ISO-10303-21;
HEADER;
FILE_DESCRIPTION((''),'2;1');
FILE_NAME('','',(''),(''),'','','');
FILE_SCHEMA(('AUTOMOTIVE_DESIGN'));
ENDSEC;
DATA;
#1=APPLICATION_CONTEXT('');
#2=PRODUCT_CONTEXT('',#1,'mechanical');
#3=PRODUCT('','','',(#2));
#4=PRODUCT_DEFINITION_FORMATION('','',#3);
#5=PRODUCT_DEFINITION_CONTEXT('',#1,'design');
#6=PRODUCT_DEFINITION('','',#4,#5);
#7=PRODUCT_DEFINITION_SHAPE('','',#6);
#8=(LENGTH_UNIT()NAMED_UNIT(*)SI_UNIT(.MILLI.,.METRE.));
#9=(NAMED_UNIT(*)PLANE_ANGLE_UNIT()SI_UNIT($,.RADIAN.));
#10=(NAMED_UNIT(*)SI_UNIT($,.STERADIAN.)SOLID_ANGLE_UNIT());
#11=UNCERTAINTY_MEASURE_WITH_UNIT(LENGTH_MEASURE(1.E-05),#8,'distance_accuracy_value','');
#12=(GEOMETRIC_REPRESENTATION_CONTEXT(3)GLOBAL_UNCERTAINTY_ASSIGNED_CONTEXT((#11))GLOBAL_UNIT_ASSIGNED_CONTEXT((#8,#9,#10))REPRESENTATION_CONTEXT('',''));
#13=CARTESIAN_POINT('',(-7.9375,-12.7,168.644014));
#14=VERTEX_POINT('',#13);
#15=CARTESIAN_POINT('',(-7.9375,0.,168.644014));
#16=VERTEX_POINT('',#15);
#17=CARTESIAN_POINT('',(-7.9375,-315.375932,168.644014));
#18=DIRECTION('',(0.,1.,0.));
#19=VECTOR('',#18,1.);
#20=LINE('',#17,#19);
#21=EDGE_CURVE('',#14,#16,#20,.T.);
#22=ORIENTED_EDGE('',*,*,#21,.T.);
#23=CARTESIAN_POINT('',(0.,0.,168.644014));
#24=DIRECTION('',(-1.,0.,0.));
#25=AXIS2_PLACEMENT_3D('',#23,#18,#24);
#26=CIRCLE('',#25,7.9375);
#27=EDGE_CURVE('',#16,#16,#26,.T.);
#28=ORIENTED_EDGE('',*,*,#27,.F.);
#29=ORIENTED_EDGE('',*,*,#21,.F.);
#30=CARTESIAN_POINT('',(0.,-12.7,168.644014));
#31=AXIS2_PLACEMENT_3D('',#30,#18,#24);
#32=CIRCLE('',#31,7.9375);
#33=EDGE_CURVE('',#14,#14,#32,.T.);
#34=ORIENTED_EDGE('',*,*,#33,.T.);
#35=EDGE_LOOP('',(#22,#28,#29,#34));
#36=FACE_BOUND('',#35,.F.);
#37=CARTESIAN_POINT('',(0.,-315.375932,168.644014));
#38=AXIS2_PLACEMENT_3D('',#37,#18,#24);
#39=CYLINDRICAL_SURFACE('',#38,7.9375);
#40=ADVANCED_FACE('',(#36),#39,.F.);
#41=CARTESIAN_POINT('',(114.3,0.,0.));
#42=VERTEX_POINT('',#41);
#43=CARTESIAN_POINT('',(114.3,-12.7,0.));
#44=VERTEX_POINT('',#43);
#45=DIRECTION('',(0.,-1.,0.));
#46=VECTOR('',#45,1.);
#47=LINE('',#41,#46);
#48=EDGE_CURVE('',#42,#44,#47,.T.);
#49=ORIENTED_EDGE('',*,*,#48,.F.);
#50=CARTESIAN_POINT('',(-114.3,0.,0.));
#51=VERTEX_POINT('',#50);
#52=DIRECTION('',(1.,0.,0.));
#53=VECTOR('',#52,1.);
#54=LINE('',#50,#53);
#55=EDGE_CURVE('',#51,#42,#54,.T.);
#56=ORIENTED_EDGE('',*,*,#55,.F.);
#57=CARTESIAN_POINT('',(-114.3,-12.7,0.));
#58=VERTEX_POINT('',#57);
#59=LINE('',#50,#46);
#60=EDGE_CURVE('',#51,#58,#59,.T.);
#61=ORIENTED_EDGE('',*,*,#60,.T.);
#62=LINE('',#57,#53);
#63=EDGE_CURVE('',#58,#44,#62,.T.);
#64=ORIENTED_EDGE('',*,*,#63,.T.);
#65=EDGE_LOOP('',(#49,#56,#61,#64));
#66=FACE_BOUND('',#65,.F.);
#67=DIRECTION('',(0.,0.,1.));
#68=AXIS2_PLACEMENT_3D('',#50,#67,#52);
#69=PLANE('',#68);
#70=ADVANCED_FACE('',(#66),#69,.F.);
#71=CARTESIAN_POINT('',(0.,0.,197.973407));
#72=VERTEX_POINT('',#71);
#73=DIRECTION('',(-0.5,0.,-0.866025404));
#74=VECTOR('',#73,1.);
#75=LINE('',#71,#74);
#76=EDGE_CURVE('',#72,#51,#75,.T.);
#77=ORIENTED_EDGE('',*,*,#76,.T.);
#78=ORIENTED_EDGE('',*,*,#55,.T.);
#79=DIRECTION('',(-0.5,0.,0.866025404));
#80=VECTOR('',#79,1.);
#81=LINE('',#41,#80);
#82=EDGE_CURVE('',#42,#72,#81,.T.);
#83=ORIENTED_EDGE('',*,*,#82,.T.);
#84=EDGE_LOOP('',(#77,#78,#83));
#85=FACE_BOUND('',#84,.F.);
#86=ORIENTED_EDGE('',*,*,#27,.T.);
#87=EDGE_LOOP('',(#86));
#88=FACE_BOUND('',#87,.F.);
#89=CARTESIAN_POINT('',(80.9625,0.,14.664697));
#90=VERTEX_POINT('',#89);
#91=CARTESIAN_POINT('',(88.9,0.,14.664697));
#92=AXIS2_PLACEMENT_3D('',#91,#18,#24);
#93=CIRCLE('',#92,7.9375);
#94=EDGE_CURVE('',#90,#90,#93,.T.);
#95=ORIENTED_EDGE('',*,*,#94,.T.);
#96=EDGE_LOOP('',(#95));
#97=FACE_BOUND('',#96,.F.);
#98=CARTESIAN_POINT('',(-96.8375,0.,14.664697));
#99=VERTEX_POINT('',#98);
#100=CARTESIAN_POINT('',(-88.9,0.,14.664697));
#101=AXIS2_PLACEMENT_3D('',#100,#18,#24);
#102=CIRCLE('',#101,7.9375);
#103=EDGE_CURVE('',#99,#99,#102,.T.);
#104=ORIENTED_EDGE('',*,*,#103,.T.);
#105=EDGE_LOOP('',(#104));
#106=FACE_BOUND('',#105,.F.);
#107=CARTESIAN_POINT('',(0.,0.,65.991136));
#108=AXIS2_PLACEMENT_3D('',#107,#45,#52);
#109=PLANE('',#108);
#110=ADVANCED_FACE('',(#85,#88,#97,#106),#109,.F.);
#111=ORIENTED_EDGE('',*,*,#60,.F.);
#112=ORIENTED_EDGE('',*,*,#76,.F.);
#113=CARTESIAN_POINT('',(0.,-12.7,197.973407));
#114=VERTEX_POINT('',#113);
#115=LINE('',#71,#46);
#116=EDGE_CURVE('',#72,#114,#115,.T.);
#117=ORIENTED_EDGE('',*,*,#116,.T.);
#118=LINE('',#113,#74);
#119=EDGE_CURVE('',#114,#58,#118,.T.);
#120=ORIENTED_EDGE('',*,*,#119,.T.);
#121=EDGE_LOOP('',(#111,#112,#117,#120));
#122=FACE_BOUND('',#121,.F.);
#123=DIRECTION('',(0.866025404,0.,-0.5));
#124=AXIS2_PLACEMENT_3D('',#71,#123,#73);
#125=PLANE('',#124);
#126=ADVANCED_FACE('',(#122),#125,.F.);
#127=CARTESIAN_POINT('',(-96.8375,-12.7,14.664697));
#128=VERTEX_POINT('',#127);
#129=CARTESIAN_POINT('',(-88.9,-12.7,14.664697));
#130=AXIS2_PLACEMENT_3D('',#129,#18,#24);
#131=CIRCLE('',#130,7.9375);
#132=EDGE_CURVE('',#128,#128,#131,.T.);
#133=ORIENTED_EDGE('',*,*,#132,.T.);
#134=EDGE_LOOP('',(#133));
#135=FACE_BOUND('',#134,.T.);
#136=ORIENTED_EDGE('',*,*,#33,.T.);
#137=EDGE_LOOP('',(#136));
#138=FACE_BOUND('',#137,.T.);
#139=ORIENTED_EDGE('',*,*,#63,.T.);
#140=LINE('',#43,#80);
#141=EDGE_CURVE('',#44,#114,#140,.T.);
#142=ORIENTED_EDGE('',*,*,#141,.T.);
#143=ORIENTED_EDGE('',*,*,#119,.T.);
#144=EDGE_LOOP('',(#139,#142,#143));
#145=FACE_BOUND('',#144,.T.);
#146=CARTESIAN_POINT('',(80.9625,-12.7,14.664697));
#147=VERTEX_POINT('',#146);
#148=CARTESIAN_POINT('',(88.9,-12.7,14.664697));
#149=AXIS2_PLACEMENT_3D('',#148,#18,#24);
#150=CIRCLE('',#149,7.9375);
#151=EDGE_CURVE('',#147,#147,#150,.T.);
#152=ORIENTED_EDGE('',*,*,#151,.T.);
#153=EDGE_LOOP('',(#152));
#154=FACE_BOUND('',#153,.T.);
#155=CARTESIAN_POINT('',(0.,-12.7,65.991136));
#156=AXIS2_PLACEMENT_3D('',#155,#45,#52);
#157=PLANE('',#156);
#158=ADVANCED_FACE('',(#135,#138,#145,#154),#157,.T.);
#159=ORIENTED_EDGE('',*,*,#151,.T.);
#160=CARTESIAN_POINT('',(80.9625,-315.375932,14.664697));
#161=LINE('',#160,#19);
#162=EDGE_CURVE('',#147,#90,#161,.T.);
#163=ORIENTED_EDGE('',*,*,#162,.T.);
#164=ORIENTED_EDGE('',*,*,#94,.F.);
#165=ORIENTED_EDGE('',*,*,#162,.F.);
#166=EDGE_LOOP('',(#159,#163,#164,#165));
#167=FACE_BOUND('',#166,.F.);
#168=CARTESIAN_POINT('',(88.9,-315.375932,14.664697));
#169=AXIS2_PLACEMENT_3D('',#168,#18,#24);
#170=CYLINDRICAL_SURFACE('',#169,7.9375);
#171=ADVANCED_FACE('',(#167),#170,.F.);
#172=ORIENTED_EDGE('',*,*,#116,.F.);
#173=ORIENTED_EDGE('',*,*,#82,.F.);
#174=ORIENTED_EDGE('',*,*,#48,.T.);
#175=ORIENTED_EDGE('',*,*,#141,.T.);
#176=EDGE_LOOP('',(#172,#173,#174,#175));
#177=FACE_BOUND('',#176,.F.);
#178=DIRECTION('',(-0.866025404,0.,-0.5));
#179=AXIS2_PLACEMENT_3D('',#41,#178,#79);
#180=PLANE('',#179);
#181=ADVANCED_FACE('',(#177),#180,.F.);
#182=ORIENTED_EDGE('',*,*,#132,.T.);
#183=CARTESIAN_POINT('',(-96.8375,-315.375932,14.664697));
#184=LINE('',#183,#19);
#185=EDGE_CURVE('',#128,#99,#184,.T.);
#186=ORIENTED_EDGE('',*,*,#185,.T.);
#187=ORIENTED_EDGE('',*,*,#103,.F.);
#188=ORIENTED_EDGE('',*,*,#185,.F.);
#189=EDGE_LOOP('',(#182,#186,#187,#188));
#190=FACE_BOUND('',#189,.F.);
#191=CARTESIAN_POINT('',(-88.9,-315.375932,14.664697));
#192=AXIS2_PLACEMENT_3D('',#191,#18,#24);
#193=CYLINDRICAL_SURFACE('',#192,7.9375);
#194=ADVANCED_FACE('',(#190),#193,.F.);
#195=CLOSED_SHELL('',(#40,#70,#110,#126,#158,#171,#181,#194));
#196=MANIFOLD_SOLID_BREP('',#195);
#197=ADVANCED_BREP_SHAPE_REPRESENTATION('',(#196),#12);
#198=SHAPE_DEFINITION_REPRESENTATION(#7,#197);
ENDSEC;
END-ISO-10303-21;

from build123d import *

# Parameters (mm, degrees)
F1_DEPTH = 12.7
F3_D     = 15.875


# Not quite as in the source:
# - a length typed as a fraction of an inch, garbled in the dataset ("3 / 203.2 mm" for 3/8 in), is restored


with BuildPart() as f1:
    # F0 (on Front) → F1 (new body)
    with BuildSketch(Plane.XZ):
        Polygon((114.3, 0), (0, 197.9734073051), (-114.3, 0), align=None)
    extrude(amount=F1_DEPTH)

    # F3 (through all)
    with Locations(Plane.XZ.offset(12.7)):
        with Locations((0, 168.6440136303), (-88.9, 14.6646968374), (88.9, 14.6646968374)):
            Hole(F3_D / 2)


solid = f1.part
